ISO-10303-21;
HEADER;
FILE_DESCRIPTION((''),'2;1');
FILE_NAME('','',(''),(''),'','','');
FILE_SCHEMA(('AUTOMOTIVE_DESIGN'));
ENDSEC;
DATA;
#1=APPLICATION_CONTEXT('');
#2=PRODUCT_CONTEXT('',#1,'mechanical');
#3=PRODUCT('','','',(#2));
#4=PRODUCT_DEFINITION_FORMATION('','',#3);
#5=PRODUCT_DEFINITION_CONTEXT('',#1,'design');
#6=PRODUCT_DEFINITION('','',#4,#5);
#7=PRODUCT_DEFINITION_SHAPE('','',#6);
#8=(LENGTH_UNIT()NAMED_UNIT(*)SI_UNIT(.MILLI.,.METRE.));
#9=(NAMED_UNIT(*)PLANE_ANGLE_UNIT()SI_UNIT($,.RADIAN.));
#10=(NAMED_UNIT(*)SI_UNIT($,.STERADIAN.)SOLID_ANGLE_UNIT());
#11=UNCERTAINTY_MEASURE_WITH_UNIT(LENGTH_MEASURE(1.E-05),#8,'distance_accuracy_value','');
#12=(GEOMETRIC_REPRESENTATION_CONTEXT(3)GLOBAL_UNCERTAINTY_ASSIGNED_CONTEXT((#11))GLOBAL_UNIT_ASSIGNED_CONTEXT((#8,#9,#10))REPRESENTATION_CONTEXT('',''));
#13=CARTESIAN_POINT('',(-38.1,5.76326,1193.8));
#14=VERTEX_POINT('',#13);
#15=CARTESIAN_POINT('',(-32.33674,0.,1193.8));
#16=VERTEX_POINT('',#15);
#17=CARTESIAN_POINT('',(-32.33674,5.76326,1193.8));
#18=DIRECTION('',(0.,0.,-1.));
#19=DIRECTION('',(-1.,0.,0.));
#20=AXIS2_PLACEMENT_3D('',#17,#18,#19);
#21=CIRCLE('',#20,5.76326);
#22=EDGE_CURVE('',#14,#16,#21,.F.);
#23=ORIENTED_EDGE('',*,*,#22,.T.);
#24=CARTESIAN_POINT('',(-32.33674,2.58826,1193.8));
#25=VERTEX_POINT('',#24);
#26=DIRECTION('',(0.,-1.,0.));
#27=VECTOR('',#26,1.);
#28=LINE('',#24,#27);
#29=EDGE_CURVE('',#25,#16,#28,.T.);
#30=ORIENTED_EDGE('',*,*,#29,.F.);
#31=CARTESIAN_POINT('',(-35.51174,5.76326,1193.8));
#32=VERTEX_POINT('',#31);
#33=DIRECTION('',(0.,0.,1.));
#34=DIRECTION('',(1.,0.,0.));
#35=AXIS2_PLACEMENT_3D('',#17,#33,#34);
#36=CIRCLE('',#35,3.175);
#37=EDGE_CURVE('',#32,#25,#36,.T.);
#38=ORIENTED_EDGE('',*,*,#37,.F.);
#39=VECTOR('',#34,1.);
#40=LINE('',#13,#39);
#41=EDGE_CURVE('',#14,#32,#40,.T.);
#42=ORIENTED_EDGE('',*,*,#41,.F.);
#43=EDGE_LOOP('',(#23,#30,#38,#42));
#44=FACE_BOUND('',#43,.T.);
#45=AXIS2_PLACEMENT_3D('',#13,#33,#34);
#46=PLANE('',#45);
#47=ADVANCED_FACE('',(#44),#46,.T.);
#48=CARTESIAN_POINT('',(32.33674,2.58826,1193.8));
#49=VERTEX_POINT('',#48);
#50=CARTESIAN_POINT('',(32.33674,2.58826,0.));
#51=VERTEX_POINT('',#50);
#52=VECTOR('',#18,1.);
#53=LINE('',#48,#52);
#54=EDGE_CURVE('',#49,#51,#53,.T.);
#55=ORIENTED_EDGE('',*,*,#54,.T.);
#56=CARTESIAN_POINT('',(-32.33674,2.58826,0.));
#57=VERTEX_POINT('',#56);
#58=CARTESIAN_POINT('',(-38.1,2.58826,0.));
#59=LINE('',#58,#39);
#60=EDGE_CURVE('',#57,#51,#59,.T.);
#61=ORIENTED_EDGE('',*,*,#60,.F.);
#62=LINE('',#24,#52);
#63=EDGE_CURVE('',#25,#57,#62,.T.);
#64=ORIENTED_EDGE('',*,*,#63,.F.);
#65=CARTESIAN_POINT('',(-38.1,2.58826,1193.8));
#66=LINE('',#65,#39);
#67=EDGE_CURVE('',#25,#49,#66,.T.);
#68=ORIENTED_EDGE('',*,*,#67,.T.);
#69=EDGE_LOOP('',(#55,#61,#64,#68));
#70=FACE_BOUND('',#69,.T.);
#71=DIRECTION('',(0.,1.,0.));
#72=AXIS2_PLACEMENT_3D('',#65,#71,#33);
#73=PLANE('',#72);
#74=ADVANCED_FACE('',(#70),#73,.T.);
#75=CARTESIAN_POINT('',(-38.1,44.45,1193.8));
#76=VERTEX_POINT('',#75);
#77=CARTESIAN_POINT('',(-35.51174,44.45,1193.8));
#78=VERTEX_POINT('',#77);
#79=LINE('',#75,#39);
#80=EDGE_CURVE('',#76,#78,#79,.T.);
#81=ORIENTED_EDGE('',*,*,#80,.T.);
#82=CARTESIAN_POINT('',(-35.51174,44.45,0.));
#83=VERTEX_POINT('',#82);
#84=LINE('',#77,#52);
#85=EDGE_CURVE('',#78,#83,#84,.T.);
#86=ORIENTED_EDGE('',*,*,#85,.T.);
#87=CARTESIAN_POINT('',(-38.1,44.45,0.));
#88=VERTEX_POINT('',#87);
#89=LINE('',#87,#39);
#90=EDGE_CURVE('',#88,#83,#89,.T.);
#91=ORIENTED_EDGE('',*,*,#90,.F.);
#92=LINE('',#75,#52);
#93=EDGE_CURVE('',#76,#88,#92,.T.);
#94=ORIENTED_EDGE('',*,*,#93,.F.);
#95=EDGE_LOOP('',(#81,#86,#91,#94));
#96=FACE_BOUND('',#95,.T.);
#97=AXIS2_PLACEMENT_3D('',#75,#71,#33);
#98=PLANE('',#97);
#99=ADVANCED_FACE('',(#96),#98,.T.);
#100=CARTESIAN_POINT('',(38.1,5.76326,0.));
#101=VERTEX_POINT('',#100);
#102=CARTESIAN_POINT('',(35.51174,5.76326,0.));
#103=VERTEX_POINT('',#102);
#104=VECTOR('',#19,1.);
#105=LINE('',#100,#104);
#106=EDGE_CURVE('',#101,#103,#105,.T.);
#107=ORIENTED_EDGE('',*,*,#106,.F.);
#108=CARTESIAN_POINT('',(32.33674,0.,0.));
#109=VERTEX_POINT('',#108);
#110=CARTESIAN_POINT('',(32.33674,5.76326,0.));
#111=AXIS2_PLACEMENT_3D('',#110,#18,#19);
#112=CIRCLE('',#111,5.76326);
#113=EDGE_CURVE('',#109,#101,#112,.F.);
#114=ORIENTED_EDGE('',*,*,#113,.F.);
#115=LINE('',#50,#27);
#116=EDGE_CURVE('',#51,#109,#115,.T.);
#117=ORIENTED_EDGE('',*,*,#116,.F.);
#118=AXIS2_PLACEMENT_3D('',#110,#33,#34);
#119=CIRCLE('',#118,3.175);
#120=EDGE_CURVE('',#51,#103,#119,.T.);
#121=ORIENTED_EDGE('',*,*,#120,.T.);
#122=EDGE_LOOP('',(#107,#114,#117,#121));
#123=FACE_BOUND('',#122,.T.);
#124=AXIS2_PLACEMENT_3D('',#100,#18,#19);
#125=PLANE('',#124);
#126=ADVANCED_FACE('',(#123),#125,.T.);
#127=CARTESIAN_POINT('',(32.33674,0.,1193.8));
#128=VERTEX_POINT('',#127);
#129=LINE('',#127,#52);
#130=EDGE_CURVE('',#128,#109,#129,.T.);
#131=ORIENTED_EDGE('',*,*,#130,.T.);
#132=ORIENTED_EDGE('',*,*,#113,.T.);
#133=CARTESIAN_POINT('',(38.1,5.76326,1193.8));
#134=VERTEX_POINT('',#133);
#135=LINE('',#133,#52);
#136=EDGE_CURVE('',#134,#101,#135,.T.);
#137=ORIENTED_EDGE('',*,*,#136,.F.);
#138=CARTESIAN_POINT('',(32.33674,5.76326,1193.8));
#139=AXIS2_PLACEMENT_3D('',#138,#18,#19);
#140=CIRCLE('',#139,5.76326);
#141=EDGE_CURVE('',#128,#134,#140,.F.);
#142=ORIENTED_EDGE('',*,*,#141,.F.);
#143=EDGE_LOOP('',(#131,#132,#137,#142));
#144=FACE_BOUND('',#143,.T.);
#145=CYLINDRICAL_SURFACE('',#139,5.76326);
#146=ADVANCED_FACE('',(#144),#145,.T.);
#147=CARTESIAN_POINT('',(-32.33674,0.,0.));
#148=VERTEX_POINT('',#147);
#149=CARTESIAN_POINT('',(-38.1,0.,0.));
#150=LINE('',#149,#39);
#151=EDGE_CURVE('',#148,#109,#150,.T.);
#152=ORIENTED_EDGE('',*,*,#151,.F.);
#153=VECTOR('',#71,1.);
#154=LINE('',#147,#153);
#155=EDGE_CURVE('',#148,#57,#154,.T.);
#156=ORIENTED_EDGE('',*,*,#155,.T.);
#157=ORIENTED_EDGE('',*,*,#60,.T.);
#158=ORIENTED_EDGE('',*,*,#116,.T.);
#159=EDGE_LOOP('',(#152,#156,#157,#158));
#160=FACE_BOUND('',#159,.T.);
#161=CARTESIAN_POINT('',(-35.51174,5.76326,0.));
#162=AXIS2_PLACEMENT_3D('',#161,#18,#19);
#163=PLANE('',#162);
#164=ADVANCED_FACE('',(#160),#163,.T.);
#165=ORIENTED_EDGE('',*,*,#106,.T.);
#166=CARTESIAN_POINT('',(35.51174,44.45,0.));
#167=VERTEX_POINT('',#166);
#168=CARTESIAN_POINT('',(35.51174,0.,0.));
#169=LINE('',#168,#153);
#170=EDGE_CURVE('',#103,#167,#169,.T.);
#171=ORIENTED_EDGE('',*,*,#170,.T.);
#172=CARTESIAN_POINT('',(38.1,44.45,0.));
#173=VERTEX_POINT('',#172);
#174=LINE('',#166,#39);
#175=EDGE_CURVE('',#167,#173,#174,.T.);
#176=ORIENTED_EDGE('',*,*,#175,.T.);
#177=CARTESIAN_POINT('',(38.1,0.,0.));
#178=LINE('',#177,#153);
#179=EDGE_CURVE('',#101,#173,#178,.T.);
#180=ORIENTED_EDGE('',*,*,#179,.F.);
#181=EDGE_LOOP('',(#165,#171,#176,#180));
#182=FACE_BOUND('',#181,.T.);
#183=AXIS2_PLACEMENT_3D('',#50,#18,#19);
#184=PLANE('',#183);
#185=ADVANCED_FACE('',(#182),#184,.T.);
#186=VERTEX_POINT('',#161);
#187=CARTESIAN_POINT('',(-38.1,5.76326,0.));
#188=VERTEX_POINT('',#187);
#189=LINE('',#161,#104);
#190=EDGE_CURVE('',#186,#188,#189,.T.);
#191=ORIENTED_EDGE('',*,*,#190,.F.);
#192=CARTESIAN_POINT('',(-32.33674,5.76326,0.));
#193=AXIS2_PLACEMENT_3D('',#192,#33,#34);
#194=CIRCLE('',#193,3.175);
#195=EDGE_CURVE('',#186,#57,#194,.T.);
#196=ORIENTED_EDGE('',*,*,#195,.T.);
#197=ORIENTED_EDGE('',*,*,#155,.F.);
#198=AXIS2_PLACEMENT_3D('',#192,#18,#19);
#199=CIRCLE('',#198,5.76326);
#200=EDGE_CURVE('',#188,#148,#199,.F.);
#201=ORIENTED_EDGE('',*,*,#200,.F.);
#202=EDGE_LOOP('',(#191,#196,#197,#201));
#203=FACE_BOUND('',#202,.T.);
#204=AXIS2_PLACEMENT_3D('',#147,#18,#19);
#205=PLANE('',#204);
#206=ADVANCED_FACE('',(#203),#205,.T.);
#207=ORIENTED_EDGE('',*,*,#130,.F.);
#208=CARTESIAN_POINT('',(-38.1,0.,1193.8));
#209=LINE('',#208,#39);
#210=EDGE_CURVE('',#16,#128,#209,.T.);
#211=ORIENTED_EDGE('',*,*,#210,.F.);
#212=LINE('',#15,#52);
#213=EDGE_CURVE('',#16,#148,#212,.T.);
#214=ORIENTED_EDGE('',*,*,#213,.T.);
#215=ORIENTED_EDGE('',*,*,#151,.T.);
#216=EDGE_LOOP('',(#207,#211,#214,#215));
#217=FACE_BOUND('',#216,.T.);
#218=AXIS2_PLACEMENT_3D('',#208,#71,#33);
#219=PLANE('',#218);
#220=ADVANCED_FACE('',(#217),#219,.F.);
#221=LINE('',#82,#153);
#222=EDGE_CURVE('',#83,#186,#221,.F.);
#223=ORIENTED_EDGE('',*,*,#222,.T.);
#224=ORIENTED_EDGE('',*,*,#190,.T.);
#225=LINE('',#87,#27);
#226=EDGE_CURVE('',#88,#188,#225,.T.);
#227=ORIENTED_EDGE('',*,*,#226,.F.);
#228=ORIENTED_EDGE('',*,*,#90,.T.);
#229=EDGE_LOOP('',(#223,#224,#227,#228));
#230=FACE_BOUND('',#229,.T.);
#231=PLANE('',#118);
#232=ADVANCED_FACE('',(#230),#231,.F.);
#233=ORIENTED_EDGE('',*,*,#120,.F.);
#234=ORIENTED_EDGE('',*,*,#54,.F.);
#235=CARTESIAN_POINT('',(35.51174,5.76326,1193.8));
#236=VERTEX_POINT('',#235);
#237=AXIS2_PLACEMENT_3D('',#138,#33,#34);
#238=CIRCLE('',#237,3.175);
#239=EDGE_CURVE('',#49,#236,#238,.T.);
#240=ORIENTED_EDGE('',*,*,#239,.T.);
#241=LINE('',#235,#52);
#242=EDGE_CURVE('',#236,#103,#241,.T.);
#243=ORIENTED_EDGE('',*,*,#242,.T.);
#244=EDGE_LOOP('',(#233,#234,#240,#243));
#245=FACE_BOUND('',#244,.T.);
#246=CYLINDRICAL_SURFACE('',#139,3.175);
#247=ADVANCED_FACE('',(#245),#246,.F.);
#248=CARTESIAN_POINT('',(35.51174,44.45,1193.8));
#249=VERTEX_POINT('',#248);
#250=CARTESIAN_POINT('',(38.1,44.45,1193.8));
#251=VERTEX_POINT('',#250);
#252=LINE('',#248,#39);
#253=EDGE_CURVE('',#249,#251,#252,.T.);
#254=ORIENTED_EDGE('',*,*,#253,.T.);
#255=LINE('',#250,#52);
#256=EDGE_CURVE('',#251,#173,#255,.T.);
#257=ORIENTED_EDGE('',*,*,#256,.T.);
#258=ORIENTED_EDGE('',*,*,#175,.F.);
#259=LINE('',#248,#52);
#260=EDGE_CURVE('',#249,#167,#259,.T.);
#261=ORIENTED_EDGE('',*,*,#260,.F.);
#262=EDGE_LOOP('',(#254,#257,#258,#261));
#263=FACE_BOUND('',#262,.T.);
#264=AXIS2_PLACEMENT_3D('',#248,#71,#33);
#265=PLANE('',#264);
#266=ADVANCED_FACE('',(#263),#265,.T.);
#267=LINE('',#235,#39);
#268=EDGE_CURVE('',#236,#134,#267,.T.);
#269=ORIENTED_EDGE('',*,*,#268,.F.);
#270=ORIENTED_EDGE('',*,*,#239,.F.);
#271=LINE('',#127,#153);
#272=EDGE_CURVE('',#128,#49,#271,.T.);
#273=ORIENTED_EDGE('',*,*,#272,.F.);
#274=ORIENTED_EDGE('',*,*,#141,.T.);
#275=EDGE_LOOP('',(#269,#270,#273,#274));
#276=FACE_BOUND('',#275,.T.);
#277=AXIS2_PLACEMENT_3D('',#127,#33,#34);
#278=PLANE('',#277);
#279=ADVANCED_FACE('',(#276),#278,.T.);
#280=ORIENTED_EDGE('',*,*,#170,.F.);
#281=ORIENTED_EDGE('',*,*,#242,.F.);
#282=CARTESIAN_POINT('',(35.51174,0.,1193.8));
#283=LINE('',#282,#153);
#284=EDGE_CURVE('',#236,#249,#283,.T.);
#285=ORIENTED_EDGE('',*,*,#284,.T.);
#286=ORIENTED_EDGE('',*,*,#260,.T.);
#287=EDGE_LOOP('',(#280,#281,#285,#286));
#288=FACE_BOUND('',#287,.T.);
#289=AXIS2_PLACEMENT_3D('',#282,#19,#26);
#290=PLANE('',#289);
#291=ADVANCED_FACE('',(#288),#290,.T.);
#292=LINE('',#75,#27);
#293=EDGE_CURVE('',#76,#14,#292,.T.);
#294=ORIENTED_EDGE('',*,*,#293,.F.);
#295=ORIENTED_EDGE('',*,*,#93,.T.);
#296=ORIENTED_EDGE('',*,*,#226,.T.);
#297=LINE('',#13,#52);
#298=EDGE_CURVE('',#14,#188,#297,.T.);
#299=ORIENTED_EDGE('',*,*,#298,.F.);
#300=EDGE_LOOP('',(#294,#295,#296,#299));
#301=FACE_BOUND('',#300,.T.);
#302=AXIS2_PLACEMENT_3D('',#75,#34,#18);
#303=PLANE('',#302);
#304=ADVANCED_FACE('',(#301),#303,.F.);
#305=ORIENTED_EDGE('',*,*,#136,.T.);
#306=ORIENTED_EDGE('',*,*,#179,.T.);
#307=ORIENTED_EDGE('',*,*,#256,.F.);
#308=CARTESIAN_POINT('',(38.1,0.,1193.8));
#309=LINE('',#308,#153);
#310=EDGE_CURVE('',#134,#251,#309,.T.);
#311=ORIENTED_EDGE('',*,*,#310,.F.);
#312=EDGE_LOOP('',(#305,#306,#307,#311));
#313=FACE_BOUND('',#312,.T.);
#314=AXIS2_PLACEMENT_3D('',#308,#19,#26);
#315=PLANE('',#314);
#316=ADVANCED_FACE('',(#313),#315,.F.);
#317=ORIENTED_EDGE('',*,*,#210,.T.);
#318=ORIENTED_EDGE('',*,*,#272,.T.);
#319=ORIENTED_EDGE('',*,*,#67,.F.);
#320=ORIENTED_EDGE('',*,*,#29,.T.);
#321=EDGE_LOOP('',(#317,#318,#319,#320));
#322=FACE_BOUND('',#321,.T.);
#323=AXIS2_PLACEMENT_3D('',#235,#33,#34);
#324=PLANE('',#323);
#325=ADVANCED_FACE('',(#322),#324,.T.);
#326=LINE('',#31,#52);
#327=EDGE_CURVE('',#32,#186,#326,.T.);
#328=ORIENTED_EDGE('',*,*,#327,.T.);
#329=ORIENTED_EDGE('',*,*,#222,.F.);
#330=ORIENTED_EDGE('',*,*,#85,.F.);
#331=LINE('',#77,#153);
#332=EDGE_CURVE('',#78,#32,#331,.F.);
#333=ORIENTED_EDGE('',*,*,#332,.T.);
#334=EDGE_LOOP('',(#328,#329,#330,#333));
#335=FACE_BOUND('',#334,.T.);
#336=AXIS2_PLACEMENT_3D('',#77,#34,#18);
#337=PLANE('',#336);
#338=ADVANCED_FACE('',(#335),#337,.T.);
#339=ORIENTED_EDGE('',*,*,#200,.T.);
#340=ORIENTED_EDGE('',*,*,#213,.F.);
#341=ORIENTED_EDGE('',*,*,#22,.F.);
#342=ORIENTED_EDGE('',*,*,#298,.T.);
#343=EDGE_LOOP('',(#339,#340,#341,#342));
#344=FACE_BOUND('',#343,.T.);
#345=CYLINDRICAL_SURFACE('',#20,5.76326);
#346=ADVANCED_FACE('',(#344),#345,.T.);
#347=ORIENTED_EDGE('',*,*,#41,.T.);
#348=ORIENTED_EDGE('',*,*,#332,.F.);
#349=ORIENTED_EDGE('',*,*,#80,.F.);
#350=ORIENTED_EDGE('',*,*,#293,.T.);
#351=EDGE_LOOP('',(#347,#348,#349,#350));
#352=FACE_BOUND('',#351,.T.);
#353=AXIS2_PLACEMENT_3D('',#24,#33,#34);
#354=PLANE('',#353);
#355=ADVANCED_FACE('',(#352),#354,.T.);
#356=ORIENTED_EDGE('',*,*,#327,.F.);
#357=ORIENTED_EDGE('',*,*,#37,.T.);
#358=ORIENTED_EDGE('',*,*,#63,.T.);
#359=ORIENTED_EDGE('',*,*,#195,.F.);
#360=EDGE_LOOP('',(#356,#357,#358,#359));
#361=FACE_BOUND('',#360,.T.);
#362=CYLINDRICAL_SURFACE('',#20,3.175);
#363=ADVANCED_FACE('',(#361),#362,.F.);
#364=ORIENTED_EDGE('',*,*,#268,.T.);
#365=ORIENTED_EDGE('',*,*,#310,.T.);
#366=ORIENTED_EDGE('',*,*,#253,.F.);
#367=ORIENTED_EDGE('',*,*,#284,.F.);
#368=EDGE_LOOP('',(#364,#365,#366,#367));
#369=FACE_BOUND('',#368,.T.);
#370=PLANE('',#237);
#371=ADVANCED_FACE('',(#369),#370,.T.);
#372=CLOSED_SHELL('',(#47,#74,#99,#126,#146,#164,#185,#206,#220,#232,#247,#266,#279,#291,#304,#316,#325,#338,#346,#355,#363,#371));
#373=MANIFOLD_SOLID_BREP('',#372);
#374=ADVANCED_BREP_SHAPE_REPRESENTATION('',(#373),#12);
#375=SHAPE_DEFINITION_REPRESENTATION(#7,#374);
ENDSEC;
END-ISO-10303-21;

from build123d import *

# Parameters (mm, degrees)
BASE_FLANGE1_DEPTH = 1193.8


# Sheet-metal steps are written as plain solids
with BuildPart() as part:
    # Sketch1 → Base-Flange1 (new body)
    with BuildSketch(Plane.XY):
        with BuildLine():
            Line((-38.1, 44.45), (-38.1, 5.76326))
            ThreePointArc((-38.1, 5.76326), (-36.411980228, 1.688019772), (-32.33674, 0))
            Line((-32.33674, 0), (32.33674, 0))
            ThreePointArc((32.33674, 0), (36.411980228, 1.688019772), (38.1, 5.76326))
            Line((38.1, 5.76326), (38.1, 44.45))
            Line((38.1, 44.45), (35.51174, 44.45))
            Line((35.51174, 44.45), (35.51174, 5.76326))
            ThreePointArc((35.51174, 5.76326), (34.58180403, 3.51819597), (32.33674, 2.58826))
            Line((32.33674, 2.58826), (-32.33674, 2.58826))
            ThreePointArc((-32.33674, 2.58826), (-34.58180403, 3.51819597), (-35.51174, 5.76326))
            Line((-35.51174, 5.76326), (-35.51174, 44.45))
            Line((-35.51174, 44.45), (-38.1, 44.45))
        make_face()
    extrude(amount=BASE_FLANGE1_DEPTH)


solid = part.part
